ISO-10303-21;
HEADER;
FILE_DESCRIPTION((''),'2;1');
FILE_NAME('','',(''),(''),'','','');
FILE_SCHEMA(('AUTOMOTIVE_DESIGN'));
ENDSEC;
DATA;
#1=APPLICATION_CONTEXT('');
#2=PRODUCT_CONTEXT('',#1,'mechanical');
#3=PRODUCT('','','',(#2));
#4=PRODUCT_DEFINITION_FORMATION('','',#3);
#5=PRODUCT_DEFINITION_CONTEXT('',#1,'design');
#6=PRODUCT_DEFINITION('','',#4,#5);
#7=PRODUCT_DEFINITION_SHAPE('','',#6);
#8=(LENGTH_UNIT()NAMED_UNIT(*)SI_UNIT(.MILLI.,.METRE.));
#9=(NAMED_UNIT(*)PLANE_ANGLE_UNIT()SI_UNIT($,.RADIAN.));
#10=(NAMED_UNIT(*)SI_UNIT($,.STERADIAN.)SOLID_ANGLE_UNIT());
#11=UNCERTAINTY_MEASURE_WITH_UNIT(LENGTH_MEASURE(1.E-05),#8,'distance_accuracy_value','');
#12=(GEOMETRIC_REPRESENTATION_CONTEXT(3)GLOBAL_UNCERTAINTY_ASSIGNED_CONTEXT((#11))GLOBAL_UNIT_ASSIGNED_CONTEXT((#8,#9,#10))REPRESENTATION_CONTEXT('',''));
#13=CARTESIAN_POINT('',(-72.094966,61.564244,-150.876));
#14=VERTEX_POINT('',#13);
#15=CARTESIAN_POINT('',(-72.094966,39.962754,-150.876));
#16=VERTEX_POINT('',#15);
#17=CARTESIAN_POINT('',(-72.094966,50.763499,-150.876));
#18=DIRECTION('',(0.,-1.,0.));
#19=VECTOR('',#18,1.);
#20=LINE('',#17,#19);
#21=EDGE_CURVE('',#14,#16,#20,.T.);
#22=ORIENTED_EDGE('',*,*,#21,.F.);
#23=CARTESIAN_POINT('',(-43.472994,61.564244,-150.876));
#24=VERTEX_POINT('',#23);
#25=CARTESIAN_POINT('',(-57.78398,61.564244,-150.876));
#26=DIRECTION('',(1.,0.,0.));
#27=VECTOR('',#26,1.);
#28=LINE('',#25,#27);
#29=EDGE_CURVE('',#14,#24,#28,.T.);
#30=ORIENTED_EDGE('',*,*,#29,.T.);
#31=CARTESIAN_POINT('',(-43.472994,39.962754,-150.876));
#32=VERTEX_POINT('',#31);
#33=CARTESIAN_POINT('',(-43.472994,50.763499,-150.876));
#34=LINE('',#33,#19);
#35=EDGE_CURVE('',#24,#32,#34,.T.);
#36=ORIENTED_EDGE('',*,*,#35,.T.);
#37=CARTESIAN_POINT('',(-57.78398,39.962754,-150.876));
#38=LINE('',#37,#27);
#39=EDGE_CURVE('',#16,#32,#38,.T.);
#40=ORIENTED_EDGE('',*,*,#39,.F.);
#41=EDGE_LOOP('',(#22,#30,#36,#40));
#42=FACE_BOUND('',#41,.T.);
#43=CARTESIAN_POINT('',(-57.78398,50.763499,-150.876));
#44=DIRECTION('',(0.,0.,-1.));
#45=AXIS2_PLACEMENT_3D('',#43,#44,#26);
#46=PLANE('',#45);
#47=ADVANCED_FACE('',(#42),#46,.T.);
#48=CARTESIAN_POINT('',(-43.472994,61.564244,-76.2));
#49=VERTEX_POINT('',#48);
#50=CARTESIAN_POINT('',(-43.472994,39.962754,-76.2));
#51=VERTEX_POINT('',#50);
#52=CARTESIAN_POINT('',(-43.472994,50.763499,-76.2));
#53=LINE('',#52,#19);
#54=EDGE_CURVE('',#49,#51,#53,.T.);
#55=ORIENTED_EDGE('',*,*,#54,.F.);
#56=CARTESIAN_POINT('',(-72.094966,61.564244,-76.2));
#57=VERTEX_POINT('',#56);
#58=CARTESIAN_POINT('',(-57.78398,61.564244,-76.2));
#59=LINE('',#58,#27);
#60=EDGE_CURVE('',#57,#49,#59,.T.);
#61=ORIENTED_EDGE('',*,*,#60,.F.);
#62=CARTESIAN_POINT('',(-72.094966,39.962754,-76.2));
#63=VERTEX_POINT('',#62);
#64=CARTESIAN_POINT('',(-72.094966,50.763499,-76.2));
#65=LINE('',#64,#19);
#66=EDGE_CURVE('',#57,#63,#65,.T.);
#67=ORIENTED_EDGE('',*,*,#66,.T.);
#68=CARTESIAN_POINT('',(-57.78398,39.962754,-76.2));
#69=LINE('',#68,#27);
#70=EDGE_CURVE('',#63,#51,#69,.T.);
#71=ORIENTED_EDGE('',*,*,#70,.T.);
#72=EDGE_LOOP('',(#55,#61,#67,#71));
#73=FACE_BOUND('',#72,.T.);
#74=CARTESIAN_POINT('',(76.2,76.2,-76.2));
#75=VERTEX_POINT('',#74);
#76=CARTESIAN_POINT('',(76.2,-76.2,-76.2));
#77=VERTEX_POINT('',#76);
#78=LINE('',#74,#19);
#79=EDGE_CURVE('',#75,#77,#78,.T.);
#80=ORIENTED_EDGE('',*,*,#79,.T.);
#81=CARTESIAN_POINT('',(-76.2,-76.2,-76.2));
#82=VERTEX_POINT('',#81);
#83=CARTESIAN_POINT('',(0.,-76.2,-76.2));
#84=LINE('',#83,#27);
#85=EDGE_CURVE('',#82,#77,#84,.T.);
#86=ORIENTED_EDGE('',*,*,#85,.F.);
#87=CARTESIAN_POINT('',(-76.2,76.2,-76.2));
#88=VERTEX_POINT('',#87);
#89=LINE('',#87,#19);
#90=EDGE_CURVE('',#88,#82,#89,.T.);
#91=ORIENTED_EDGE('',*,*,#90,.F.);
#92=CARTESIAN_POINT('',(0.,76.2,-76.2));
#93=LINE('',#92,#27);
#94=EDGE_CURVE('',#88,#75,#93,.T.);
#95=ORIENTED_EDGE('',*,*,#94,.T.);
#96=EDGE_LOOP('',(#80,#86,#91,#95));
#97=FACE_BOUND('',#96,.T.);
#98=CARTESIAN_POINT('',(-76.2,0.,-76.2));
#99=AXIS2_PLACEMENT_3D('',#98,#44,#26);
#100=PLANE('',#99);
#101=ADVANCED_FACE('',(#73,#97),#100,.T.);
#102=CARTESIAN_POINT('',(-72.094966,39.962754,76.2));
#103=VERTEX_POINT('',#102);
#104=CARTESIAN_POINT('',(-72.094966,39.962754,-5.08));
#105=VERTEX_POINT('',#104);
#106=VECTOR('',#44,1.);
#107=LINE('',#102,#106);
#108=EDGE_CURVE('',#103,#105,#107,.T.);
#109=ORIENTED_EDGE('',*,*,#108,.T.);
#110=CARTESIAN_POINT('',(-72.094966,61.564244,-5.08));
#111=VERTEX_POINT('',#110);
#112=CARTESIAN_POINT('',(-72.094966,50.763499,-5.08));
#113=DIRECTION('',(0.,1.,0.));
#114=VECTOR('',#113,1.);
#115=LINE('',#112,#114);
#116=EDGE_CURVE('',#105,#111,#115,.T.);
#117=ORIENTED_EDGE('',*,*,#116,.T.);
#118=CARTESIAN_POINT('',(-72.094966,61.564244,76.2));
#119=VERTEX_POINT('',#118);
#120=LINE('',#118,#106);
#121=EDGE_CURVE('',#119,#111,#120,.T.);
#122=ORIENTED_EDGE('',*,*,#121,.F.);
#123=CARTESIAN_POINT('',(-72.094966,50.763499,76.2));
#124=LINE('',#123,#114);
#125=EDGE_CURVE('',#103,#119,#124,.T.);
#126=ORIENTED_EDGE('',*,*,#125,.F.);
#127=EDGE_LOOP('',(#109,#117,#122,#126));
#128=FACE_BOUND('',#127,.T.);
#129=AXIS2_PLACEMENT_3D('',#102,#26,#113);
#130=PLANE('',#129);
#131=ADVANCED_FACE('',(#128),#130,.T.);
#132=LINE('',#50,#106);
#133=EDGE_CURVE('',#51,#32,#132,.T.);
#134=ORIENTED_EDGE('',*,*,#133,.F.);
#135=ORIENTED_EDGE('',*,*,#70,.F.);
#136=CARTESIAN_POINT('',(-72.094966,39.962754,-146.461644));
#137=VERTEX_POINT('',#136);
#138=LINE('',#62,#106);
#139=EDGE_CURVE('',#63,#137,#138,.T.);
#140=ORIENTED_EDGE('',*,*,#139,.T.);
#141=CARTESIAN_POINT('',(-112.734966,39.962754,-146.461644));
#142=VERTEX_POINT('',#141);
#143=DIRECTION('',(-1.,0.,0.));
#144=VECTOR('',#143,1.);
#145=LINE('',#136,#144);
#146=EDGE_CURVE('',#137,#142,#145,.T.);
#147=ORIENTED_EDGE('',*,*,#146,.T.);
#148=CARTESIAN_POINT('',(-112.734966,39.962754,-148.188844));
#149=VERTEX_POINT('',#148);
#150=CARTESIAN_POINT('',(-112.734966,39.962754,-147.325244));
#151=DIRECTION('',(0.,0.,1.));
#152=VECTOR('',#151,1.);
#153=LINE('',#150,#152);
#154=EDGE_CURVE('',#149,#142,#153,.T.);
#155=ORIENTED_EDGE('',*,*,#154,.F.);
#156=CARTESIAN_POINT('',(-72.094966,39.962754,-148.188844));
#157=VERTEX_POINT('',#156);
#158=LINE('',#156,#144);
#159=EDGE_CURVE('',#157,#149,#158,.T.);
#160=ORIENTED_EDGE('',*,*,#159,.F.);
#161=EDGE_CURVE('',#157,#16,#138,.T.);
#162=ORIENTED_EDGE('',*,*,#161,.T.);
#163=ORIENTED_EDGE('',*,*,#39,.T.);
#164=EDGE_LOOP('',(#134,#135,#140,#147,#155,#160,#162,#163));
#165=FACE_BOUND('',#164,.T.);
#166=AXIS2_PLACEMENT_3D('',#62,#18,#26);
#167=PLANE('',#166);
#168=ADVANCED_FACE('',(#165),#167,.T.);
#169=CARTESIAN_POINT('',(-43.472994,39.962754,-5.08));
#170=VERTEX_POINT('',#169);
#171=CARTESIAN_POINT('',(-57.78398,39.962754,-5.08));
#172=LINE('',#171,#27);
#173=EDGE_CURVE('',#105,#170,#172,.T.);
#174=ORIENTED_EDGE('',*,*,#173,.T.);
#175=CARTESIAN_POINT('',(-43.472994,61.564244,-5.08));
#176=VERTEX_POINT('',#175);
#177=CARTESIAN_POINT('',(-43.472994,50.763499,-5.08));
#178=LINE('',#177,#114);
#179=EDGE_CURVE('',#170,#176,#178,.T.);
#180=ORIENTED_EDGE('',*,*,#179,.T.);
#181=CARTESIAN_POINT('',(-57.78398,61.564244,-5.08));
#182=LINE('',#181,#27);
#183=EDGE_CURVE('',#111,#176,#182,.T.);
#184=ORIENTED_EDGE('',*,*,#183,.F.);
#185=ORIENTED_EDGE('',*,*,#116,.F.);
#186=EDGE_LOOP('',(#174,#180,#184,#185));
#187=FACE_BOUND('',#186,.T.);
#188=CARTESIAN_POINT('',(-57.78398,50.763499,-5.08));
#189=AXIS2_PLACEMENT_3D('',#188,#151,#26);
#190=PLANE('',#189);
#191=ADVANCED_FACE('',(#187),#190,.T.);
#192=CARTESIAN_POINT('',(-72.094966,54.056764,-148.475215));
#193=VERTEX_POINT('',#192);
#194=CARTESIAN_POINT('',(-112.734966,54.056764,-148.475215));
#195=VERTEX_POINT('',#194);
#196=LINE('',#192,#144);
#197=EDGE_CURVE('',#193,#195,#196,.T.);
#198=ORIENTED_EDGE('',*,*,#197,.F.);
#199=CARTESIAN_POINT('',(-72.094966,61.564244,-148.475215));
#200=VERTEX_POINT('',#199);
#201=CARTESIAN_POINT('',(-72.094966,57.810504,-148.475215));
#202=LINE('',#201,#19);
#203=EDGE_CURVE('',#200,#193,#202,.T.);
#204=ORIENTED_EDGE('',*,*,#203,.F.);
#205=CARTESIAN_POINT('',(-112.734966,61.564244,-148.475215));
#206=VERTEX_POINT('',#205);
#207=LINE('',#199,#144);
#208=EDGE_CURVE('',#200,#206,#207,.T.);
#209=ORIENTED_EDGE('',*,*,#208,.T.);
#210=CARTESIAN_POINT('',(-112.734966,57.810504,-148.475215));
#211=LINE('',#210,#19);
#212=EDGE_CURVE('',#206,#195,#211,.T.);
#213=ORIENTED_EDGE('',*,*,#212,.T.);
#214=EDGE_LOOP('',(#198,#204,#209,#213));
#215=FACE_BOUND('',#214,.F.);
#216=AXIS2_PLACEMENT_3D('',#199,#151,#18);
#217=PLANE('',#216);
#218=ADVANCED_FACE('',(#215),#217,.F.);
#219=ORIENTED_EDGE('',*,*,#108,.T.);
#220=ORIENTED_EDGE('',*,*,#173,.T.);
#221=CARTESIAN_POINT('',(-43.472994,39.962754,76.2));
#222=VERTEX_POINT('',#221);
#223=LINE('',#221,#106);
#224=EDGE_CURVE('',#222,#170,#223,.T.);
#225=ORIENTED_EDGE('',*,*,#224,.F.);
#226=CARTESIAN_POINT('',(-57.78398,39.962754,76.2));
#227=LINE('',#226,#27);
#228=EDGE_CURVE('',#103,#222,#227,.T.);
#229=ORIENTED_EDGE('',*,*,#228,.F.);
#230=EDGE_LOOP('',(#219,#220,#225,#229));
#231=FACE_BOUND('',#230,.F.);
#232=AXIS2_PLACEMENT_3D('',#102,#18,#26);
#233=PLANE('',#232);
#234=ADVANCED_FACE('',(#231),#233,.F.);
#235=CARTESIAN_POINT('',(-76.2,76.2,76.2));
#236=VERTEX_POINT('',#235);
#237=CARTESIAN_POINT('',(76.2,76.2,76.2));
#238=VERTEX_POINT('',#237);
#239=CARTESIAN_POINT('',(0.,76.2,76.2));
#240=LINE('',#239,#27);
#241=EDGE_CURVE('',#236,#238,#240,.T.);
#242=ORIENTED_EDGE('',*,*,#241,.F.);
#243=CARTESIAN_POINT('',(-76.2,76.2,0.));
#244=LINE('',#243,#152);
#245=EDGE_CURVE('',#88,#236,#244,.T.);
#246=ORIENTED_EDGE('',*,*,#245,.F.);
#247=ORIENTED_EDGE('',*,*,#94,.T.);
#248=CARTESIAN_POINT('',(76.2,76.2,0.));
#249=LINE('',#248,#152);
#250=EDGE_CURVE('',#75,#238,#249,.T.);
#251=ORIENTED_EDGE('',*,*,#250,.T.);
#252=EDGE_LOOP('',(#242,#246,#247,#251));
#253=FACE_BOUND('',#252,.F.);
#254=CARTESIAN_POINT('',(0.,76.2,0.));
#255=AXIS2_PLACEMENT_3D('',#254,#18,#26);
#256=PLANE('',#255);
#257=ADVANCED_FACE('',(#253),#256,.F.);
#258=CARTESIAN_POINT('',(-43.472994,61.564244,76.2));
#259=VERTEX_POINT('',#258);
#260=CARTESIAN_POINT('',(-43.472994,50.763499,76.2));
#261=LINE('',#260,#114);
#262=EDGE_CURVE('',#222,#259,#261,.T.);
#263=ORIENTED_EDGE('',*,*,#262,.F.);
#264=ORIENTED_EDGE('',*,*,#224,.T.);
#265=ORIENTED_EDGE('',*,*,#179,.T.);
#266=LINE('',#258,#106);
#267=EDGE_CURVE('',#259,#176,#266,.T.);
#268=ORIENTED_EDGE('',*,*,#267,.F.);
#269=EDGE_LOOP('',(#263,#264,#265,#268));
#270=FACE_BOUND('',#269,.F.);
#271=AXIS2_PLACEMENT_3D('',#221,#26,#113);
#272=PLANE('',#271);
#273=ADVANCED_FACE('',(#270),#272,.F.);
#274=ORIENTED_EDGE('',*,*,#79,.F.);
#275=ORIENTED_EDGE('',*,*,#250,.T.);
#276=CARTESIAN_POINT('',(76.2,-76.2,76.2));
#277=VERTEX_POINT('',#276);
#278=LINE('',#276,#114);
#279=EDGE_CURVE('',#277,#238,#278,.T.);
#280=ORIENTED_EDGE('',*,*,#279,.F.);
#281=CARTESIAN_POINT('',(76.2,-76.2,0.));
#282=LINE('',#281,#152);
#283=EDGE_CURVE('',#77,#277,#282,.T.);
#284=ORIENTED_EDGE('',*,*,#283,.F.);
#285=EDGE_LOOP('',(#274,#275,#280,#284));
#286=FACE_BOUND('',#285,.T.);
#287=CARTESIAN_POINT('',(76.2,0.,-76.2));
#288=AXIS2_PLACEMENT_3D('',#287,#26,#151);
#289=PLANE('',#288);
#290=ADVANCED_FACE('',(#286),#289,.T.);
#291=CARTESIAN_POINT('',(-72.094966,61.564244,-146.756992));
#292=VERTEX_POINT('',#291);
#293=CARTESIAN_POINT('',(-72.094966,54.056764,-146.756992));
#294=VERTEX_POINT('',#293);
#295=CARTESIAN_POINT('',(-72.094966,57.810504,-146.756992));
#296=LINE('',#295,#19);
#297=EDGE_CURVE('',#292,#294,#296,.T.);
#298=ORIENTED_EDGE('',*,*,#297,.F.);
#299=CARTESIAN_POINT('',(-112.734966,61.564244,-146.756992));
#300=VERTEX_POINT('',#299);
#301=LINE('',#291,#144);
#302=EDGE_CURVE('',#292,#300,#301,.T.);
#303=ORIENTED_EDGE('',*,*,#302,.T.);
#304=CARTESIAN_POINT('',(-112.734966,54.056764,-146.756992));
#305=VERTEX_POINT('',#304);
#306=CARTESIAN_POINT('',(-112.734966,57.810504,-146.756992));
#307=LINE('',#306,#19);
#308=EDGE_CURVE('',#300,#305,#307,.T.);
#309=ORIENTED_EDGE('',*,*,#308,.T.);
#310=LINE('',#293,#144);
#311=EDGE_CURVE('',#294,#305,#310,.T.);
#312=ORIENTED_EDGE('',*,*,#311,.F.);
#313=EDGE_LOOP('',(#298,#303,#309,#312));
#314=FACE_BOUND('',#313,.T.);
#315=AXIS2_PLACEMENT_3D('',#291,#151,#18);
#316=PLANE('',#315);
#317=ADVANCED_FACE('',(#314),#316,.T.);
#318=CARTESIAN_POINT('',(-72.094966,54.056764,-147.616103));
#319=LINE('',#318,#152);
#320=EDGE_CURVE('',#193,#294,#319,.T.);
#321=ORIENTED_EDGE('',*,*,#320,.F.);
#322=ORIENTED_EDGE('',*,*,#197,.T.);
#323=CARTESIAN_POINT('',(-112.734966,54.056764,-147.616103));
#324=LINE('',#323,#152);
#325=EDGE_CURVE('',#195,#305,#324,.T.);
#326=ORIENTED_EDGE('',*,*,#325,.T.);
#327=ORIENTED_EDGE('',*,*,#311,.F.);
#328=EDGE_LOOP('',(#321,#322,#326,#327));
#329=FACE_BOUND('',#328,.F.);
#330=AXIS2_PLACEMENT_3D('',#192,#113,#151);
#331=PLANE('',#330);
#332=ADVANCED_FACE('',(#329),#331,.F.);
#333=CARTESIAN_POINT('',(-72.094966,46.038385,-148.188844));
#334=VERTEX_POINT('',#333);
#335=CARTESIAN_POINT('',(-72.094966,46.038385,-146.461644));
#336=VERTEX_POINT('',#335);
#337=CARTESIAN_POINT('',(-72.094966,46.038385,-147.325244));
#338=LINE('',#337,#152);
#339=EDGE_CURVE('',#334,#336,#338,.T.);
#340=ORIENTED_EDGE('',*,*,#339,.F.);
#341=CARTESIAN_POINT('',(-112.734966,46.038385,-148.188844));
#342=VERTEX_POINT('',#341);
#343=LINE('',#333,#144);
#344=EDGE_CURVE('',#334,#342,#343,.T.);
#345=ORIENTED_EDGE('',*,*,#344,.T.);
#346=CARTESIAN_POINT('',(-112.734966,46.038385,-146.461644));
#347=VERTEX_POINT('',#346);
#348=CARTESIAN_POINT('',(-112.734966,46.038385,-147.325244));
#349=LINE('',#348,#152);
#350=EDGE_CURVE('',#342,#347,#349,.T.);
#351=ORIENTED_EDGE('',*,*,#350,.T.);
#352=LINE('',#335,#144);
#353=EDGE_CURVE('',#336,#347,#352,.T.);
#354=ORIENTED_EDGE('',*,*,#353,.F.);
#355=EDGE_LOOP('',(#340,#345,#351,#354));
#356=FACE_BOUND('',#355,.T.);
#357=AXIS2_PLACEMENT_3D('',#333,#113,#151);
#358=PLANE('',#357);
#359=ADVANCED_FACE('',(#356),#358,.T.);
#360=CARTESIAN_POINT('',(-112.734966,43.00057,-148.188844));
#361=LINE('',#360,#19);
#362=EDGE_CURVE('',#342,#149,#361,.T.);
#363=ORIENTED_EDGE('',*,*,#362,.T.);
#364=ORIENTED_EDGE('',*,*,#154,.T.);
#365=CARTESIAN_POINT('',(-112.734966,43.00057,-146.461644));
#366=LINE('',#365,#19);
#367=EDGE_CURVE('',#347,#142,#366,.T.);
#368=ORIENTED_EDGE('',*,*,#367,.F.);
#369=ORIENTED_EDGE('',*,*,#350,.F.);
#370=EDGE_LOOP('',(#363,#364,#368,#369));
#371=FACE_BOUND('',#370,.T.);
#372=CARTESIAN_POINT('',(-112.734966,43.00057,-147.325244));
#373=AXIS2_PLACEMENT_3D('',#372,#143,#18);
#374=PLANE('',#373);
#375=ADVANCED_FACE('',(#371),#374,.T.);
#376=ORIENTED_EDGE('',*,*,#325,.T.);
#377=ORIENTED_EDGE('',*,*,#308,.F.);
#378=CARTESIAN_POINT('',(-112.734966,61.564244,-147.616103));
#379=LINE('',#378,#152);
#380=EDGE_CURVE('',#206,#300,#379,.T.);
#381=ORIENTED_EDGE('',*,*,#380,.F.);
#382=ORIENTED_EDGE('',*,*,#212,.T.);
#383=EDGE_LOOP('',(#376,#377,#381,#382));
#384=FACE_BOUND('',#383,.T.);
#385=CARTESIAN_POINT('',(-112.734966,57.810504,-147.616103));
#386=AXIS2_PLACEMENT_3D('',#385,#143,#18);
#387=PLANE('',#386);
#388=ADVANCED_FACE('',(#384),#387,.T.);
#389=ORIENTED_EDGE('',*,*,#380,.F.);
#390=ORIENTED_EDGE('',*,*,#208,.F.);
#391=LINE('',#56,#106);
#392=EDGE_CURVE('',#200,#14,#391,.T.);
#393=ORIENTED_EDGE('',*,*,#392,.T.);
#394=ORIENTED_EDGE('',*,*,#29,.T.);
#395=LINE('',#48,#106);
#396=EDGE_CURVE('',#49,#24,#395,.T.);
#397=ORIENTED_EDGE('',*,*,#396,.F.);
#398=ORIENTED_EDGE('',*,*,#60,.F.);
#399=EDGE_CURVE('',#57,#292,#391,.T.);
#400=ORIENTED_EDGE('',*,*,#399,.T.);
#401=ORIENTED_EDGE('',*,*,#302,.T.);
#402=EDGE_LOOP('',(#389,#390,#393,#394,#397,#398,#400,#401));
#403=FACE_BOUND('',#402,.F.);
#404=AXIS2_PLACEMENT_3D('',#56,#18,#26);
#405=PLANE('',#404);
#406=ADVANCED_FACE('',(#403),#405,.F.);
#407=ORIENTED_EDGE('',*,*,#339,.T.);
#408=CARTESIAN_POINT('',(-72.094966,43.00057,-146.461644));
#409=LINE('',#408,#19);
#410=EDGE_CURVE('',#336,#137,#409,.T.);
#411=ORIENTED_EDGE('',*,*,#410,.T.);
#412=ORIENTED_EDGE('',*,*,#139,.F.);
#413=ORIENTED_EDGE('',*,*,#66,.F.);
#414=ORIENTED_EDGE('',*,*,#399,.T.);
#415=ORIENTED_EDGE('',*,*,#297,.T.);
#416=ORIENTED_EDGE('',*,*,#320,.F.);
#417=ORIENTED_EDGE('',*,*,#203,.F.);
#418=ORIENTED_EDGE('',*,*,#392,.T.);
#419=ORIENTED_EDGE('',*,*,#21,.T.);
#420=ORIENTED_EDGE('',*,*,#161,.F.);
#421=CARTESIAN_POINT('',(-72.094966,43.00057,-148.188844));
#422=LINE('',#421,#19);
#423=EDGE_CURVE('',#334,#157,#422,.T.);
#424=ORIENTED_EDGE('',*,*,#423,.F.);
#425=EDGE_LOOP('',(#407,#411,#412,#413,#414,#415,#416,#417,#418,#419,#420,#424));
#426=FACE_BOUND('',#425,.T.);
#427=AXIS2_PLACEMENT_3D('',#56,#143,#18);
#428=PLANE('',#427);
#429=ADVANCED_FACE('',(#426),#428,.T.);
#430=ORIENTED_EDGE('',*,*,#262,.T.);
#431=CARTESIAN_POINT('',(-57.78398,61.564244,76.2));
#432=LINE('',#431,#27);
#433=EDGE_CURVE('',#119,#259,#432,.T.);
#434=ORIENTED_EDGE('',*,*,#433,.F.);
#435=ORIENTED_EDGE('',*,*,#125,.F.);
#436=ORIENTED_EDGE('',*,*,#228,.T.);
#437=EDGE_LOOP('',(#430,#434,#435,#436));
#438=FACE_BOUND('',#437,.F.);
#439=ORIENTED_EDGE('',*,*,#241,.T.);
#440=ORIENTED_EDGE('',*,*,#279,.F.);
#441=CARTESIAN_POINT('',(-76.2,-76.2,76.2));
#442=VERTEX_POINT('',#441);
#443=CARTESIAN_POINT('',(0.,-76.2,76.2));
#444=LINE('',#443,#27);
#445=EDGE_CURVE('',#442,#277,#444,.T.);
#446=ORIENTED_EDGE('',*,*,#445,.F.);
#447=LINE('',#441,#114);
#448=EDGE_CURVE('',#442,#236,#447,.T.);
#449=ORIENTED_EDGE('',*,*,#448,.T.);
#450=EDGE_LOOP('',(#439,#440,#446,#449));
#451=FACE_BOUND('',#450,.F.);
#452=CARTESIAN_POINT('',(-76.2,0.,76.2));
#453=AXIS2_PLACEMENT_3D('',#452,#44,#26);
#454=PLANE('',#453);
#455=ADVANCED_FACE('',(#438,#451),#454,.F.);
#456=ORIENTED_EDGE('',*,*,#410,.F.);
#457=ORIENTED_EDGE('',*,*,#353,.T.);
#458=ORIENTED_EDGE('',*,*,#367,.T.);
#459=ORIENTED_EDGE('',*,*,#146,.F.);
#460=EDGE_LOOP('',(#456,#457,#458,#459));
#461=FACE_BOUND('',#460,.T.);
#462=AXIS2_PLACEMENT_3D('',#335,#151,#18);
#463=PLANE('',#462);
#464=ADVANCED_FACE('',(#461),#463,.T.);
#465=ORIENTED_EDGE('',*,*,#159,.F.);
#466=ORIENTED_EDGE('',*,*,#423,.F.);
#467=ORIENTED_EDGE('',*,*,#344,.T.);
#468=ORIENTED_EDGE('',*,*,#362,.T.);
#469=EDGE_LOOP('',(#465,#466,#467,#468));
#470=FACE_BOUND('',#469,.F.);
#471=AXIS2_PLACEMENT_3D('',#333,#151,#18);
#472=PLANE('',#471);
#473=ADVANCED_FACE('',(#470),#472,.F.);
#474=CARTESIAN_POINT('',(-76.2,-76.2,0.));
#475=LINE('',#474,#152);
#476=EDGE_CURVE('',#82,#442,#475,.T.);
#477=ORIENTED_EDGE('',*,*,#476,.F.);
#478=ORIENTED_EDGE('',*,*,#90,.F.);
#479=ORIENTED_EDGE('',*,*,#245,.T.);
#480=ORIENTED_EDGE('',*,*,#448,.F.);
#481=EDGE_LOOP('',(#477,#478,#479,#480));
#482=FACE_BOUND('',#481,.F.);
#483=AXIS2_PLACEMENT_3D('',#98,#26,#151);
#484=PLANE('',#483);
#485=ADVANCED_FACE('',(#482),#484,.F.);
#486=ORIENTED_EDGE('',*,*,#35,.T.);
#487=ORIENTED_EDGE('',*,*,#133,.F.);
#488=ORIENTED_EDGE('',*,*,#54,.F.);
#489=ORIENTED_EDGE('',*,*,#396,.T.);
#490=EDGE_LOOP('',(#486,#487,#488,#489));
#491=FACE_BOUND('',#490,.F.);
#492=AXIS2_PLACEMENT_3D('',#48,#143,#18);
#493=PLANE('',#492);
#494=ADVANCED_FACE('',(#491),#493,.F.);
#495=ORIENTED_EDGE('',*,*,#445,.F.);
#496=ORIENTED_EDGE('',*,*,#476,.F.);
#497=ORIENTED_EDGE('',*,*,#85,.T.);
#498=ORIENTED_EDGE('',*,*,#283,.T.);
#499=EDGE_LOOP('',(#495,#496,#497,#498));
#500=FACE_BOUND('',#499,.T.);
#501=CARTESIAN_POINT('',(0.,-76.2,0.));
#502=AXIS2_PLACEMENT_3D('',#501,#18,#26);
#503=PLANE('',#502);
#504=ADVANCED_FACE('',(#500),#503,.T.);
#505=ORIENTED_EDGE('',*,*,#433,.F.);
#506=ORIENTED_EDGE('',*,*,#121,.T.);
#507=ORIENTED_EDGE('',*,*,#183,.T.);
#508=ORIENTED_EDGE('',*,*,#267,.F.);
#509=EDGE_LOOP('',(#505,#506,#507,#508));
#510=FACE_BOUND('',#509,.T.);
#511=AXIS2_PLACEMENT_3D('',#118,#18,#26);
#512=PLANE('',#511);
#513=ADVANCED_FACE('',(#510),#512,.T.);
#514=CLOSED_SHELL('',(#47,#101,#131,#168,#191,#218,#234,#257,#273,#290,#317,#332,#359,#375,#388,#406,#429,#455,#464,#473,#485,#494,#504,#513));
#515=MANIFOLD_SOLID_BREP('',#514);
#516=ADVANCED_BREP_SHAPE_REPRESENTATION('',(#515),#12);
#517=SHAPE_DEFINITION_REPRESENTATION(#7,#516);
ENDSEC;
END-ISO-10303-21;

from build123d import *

# Parameters (mm, degrees)
F1_W       = 152.4
F1_H       = 152.4
F2_DEPTH   = 76.2
F3_W       = 28.6219716072
F3_H       = 21.6014906764
F2_FACE1_W = 152.4
F2_FACE1_H = 152.4
F4_DEPTH   = 81.28
F5_W       = 28.6219716072
F5_H       = 21.6014906764
F6_DEPTH   = 74.676
F7_W       = 7.5074806809
F7_H       = 1.7182230949
F7_W_2     = 6.0756318271
F7_H_2     = 1.7272
F8_DEPTH   = 40.64


# Not quite as in the source:
# - a variable given as a bare number and used for a length is read in inches; the dataset says mm whatever the document's units were


with BuildPart() as f2:
    # F1 (on Front) → F2 (new body, symmetric)
    with BuildSketch(Plane.XZ):
        Rectangle(F1_W, F1_H)
    extrude(amount=F2_DEPTH, both=True)

    # F3 (on face) + F2_face1 (on face) → F4 (cut)
    with BuildSketch(Plane.XY.offset(76.2)):
        with Locations((-57.7839799225, 50.7634989917)):
            Rectangle(F3_W, F3_H)
    with BuildSketch(Plane(origin=(0, 0, -76.2), x_dir=(1, 0, 0), z_dir=(0, 0, -1))):
        Rectangle(F2_FACE1_W, F2_FACE1_H)
    extrude(amount=-F4_DEPTH, dir=(0, 0, 1), mode=Mode.SUBTRACT)

    # F5 (on face) → F6 (join)
    with BuildSketch(Plane(origin=(0, 0, -76.2), x_dir=(1, 0, 0), z_dir=(0, 0, -1))):
        with Locations((-57.7839799225, -50.7634989917)):
            Rectangle(F5_W, F5_H)
    extrude(amount=F6_DEPTH)

    # F7 (on face) → F8 (join)
    with BuildSketch(Plane(origin=(-72.0949657261, 0, 0), x_dir=(0, -1, 0), z_dir=(-1, 0, 0))):
        with Locations((-57.8105039895, -147.6161032915)):
            Rectangle(F7_W, F7_H)
        with Locations((-43.0005695671, -147.3252443232)):
            Rectangle(F7_W_2, F7_H_2)
    extrude(amount=F8_DEPTH)


solid = f2.part
